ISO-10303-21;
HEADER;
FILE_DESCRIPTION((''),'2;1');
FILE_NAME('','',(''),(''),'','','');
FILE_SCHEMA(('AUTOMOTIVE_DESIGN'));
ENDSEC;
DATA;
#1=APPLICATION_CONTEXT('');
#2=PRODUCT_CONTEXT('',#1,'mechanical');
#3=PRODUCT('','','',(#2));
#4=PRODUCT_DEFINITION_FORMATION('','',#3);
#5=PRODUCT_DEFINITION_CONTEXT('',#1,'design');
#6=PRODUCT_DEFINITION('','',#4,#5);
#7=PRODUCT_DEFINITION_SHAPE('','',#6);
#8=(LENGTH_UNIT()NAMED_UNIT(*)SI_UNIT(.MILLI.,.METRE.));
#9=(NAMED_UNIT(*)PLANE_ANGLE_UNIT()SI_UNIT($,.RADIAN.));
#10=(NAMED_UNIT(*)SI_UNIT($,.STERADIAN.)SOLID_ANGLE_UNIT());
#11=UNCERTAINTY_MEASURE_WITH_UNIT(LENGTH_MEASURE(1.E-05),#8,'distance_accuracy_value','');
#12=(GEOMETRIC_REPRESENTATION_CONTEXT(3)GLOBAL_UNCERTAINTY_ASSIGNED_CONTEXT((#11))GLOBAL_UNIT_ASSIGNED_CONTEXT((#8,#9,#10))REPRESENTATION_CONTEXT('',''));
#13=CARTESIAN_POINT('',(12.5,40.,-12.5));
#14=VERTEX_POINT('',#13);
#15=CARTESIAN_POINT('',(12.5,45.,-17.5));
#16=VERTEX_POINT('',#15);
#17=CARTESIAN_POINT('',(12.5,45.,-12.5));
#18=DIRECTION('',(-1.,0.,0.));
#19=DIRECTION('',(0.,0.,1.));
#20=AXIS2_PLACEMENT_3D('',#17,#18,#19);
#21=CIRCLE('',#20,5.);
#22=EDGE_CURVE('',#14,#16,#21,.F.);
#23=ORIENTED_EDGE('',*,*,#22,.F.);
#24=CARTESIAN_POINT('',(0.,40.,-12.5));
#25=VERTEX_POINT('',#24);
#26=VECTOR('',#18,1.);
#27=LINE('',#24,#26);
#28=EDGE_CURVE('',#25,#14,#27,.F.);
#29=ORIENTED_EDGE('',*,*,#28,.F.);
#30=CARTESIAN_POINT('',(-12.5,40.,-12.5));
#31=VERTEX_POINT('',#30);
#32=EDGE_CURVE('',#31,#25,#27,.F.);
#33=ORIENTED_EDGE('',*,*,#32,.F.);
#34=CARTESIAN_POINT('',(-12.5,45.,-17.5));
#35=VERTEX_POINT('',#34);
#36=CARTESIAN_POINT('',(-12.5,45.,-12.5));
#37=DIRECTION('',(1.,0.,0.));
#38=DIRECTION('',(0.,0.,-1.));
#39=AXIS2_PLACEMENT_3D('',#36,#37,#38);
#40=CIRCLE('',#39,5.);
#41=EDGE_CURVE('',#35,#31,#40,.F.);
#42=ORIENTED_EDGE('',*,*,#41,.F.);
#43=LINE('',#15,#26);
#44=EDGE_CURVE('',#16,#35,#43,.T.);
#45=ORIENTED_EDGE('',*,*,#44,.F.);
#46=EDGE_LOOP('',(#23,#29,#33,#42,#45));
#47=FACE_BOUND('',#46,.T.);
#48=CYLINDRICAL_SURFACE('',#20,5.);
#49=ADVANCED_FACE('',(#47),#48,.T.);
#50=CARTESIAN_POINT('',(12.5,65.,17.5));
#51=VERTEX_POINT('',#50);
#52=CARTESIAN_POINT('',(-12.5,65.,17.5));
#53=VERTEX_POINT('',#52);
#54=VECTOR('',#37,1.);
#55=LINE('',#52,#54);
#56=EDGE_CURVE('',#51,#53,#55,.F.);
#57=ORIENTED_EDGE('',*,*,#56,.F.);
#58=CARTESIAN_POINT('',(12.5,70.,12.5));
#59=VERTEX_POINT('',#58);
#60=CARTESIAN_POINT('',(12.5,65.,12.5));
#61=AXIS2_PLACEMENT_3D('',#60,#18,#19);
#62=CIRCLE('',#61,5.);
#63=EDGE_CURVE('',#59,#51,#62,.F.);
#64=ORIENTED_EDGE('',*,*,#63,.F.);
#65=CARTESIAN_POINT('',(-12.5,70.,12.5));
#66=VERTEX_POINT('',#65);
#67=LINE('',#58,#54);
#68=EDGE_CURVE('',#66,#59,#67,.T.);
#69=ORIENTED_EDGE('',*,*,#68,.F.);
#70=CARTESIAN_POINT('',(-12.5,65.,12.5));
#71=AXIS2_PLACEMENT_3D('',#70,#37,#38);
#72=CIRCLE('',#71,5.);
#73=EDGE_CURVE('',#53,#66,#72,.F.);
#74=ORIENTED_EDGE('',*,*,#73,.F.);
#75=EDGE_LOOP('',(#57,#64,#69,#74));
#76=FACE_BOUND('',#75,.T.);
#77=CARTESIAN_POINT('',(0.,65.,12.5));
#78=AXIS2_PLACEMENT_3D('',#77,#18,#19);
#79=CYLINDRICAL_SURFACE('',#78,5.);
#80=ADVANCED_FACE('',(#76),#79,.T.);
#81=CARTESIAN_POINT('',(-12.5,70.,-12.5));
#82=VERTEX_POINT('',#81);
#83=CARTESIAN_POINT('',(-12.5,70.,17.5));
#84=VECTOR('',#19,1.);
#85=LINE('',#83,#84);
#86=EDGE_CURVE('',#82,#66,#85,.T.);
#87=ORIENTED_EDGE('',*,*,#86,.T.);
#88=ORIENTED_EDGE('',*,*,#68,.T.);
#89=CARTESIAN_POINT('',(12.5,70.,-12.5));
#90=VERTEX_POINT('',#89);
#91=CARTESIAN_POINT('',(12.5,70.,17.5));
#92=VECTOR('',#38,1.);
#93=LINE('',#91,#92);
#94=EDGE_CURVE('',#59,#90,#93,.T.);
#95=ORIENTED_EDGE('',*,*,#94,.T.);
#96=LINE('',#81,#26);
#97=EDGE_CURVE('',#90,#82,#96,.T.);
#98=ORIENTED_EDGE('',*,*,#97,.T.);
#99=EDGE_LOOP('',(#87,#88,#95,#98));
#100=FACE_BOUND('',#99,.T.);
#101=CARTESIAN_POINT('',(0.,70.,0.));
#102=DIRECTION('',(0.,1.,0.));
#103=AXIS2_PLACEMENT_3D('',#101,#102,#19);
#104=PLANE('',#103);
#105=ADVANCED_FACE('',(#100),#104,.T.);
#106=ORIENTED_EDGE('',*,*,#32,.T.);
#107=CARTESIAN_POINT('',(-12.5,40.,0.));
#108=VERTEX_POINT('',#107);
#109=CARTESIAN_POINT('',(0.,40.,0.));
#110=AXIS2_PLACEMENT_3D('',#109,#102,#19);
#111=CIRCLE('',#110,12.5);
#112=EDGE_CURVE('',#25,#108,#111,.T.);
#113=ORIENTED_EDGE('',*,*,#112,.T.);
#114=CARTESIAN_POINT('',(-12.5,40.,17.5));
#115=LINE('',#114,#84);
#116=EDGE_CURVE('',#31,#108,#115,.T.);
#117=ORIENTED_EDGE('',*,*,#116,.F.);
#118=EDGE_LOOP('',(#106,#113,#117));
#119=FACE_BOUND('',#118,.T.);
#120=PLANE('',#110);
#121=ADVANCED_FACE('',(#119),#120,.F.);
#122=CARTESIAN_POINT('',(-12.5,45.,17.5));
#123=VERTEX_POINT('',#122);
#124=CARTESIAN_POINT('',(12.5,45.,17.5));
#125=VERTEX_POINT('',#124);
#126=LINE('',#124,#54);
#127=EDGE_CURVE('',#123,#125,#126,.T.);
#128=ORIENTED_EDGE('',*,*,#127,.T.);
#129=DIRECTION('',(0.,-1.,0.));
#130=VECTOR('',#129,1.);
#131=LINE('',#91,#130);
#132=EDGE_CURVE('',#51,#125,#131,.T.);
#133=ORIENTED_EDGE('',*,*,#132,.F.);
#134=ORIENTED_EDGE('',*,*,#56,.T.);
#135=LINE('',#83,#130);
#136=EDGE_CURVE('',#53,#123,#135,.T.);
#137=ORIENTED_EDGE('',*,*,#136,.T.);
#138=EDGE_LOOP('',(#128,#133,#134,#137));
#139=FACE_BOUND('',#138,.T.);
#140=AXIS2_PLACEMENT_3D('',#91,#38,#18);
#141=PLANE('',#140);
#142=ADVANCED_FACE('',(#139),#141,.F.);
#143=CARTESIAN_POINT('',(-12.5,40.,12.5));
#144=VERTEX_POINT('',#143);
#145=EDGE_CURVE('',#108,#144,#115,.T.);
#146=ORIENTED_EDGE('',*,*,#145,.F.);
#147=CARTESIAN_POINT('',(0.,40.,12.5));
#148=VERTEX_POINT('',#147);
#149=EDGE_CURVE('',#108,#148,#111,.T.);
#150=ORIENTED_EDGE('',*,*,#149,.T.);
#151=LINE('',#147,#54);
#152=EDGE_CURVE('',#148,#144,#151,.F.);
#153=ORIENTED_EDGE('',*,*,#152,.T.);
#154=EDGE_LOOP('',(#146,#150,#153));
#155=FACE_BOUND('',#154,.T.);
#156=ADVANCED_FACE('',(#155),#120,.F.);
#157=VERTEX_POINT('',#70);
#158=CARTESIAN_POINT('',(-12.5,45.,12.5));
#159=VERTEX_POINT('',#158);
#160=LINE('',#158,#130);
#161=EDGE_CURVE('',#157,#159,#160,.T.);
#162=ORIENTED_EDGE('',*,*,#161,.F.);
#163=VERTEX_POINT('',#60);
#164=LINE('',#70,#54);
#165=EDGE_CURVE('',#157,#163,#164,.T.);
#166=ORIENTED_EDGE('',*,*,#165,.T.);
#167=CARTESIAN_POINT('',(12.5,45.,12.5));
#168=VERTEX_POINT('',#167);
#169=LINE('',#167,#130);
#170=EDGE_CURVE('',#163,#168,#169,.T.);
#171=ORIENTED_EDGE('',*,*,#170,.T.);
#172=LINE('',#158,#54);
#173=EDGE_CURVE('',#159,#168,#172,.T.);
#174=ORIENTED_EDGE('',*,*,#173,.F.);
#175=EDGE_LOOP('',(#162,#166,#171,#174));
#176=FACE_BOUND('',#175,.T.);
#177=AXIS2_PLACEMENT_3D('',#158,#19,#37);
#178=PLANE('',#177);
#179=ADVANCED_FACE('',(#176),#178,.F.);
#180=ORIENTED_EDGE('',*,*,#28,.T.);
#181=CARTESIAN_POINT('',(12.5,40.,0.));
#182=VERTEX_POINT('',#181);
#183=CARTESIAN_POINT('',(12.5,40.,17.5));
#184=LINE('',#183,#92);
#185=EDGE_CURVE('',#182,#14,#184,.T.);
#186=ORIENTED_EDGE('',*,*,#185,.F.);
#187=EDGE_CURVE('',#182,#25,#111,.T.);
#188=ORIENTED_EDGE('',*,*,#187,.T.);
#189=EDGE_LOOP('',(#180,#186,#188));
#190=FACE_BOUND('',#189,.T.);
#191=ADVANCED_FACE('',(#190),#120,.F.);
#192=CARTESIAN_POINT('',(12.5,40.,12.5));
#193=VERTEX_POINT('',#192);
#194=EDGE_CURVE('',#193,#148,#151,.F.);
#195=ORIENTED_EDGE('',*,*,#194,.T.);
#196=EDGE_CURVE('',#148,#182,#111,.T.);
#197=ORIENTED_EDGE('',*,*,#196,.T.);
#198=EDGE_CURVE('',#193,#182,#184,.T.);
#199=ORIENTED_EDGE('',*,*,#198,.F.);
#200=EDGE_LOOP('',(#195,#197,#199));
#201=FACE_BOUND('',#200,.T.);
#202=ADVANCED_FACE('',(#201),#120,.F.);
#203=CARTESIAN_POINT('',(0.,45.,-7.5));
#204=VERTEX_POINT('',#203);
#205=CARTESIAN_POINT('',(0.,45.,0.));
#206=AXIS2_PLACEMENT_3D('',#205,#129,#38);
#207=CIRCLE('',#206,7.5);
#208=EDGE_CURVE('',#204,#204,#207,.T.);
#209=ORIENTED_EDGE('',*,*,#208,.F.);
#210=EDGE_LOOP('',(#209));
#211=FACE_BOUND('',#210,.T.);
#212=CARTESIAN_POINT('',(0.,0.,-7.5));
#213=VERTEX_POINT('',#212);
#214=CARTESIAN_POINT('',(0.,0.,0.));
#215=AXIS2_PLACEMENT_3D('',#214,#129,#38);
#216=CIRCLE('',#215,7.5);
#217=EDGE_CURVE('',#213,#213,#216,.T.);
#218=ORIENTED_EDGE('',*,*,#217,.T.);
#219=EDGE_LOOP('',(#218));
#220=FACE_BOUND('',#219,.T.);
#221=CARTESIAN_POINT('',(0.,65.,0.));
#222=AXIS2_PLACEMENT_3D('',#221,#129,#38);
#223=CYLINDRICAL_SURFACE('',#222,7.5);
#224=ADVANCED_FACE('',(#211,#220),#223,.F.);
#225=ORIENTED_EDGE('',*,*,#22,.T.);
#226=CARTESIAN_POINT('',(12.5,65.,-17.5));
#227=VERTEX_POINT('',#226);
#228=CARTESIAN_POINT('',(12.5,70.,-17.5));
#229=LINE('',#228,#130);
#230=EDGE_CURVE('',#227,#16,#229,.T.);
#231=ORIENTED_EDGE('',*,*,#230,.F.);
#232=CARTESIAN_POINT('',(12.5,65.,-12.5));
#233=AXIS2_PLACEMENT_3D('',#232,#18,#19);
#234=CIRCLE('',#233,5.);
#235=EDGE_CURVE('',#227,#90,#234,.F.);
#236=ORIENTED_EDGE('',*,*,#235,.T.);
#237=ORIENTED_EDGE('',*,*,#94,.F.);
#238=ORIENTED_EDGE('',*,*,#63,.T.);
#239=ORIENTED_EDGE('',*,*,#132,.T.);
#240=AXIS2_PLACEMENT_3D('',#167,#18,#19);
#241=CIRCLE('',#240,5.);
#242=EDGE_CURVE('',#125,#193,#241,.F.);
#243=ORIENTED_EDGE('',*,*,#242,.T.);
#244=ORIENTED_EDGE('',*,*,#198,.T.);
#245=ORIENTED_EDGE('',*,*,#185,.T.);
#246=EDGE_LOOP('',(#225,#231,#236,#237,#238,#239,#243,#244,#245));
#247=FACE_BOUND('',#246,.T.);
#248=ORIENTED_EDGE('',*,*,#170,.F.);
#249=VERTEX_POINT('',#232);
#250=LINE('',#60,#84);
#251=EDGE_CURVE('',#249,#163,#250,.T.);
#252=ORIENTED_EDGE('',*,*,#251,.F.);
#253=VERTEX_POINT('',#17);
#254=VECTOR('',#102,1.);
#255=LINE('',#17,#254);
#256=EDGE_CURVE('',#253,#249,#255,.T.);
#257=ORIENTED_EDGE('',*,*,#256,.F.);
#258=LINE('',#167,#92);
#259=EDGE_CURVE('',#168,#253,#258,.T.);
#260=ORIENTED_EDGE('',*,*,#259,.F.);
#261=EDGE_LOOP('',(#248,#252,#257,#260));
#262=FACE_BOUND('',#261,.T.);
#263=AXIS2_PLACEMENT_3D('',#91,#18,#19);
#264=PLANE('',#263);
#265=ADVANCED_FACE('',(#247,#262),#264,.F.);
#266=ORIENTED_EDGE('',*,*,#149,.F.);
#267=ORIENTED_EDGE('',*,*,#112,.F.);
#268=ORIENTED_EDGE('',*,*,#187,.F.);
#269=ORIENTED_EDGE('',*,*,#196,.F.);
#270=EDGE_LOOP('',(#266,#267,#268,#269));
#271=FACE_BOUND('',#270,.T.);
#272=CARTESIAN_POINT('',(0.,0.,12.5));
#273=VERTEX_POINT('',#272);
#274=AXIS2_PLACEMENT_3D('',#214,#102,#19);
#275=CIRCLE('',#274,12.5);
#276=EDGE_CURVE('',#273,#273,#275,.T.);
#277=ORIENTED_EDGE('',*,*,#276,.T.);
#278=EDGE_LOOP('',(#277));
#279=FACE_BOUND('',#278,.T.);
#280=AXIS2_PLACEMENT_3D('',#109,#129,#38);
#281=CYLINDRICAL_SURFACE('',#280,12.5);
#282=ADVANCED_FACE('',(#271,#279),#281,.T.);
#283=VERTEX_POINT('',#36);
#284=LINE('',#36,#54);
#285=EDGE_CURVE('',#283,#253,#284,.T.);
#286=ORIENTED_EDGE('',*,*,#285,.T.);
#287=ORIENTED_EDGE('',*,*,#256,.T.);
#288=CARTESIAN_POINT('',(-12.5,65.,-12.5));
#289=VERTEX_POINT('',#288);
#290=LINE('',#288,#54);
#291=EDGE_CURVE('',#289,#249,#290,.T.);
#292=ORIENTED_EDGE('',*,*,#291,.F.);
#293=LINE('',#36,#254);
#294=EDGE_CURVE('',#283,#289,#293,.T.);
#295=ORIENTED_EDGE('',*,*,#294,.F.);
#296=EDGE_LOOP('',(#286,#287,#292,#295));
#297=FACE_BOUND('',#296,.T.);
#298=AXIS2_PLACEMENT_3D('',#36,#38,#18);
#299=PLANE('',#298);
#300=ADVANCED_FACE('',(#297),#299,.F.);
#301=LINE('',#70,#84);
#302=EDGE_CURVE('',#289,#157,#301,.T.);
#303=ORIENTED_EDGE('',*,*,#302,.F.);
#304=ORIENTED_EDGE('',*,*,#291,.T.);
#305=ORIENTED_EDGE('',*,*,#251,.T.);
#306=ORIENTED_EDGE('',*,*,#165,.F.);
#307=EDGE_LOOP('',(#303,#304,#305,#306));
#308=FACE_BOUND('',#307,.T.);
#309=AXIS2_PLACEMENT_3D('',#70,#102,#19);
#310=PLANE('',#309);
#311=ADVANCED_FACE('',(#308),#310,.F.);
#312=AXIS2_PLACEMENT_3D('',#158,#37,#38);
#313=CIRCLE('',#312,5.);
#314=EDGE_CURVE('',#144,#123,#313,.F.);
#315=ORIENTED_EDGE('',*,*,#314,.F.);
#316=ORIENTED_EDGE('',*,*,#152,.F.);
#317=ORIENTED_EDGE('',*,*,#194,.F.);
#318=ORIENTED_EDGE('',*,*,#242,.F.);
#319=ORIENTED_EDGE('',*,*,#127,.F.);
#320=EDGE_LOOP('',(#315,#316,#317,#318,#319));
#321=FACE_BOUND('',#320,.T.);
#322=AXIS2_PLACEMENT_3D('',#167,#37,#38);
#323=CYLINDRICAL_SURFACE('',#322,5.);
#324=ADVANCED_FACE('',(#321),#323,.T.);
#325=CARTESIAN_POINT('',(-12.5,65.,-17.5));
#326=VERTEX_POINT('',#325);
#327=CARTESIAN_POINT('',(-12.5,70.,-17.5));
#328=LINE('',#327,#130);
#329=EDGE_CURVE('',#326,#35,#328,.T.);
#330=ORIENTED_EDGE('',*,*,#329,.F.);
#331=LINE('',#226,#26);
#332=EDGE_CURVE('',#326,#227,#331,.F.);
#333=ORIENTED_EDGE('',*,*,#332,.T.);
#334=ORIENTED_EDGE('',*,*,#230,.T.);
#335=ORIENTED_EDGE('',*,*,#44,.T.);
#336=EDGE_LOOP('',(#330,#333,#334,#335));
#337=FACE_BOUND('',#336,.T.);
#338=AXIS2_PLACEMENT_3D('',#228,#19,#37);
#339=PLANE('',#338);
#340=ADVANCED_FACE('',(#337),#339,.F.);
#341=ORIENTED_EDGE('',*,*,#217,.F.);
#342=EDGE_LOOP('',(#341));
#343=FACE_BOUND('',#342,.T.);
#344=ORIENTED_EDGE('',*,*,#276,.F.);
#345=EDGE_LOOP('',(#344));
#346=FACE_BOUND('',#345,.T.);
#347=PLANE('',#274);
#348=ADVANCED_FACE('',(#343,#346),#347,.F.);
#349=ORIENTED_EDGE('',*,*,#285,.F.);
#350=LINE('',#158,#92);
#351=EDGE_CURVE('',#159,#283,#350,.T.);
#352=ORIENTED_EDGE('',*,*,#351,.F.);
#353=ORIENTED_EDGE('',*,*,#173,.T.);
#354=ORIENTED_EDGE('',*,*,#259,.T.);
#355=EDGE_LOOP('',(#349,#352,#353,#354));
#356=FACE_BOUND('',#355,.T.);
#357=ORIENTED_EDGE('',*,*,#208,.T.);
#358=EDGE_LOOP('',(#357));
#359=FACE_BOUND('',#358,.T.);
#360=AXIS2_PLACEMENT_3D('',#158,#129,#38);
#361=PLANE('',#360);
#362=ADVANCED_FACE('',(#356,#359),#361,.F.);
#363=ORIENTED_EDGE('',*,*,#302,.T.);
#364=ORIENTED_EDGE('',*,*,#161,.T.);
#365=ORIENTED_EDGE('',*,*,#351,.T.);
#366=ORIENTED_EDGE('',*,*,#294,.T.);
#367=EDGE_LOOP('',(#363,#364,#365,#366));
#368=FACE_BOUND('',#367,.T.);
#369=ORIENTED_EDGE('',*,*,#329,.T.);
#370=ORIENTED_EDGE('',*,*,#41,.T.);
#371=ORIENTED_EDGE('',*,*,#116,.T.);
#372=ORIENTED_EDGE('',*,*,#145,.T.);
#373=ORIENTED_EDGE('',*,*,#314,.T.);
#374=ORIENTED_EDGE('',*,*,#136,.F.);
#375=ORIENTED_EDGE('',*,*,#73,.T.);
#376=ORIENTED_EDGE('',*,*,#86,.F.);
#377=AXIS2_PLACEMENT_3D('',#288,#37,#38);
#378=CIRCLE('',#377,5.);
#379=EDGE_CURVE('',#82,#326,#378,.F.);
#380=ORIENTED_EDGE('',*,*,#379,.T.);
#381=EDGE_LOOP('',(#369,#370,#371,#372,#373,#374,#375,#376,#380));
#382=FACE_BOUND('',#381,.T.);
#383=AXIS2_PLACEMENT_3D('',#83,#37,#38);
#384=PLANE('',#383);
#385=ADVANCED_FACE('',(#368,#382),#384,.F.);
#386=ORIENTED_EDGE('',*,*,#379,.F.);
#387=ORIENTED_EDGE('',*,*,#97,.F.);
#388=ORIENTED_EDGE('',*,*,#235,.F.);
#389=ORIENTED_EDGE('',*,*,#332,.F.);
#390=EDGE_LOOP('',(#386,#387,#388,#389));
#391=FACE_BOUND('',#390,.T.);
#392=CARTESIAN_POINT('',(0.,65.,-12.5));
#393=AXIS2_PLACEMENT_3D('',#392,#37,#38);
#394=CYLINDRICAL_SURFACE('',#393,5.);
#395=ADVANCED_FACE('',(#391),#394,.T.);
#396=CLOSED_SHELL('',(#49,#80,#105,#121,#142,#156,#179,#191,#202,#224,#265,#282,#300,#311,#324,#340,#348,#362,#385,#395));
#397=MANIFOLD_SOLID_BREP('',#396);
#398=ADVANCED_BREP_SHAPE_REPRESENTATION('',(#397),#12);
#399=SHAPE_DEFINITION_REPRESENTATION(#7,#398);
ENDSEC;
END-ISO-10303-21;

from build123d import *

# Parameters (mm, degrees)
SKETCH1_R           = 12.5
BOSS_EXTRUDE1_DEPTH = 40
SKETCH2_W           = 25
SKETCH2_H           = 35
BOSS_EXTRUDE2_DEPTH = 30
SKETCH3_W           = 25
SKETCH3_H           = 20
CUT_EXTRUDE1_DEPTH  = 77.362621747
FILLET1_R           = 5
SKETCH4_R           = 7.5
CUT_EXTRUDE2_DEPTH  = 65


with BuildPart() as part:
    # Sketch1 → Boss-Extrude1 (new body)
    with BuildSketch(Plane(origin=(0, 0, 0), x_dir=(1, 0, 0), z_dir=(0, 1, 0))):
        with Locations(Location((0, 0, 0), (0, 0, 270))):
            Circle(SKETCH1_R)
    extrude(amount=BOSS_EXTRUDE1_DEPTH)

    # Sketch2 → Boss-Extrude2 (add)
    with BuildSketch(Plane(origin=(0, 40, 0), x_dir=(1, 0, 0), z_dir=(0, 1, 0))):
        Rectangle(SKETCH2_W, SKETCH2_H)
    extrude(amount=BOSS_EXTRUDE2_DEPTH)

    # Sketch3 → Cut-Extrude1 (cut, through all)
    with BuildSketch(Plane(origin=(12.5, 0, 0), x_dir=(0, 0, -1), z_dir=(1, 0, 0))):
        with Locations((0, 55)):
            Rectangle(SKETCH3_W, SKETCH3_H)
    extrude(amount=-CUT_EXTRUDE1_DEPTH, mode=Mode.SUBTRACT)

    # Fillet1
    fillet1_edges = [part.edges().sort_by_distance(p)[0] for p in [
        (0, 40, 17.5),
        (0, 40, -17.5),
        (0, 70, 17.5),
        (0, 70, -17.5),
    ]]
    fillet(fillet1_edges, radius=FILLET1_R - 0.0001)  # a hair under: the kernel refuses the full size

    # Sketch4 → Cut-Extrude2 (cut)
    with BuildSketch(Plane.XZ):
        with Locations(Location((0, 0, 0), (0, 0, 270))):
            Circle(SKETCH4_R)
    extrude(amount=-CUT_EXTRUDE2_DEPTH, mode=Mode.SUBTRACT)


solid = part.part
